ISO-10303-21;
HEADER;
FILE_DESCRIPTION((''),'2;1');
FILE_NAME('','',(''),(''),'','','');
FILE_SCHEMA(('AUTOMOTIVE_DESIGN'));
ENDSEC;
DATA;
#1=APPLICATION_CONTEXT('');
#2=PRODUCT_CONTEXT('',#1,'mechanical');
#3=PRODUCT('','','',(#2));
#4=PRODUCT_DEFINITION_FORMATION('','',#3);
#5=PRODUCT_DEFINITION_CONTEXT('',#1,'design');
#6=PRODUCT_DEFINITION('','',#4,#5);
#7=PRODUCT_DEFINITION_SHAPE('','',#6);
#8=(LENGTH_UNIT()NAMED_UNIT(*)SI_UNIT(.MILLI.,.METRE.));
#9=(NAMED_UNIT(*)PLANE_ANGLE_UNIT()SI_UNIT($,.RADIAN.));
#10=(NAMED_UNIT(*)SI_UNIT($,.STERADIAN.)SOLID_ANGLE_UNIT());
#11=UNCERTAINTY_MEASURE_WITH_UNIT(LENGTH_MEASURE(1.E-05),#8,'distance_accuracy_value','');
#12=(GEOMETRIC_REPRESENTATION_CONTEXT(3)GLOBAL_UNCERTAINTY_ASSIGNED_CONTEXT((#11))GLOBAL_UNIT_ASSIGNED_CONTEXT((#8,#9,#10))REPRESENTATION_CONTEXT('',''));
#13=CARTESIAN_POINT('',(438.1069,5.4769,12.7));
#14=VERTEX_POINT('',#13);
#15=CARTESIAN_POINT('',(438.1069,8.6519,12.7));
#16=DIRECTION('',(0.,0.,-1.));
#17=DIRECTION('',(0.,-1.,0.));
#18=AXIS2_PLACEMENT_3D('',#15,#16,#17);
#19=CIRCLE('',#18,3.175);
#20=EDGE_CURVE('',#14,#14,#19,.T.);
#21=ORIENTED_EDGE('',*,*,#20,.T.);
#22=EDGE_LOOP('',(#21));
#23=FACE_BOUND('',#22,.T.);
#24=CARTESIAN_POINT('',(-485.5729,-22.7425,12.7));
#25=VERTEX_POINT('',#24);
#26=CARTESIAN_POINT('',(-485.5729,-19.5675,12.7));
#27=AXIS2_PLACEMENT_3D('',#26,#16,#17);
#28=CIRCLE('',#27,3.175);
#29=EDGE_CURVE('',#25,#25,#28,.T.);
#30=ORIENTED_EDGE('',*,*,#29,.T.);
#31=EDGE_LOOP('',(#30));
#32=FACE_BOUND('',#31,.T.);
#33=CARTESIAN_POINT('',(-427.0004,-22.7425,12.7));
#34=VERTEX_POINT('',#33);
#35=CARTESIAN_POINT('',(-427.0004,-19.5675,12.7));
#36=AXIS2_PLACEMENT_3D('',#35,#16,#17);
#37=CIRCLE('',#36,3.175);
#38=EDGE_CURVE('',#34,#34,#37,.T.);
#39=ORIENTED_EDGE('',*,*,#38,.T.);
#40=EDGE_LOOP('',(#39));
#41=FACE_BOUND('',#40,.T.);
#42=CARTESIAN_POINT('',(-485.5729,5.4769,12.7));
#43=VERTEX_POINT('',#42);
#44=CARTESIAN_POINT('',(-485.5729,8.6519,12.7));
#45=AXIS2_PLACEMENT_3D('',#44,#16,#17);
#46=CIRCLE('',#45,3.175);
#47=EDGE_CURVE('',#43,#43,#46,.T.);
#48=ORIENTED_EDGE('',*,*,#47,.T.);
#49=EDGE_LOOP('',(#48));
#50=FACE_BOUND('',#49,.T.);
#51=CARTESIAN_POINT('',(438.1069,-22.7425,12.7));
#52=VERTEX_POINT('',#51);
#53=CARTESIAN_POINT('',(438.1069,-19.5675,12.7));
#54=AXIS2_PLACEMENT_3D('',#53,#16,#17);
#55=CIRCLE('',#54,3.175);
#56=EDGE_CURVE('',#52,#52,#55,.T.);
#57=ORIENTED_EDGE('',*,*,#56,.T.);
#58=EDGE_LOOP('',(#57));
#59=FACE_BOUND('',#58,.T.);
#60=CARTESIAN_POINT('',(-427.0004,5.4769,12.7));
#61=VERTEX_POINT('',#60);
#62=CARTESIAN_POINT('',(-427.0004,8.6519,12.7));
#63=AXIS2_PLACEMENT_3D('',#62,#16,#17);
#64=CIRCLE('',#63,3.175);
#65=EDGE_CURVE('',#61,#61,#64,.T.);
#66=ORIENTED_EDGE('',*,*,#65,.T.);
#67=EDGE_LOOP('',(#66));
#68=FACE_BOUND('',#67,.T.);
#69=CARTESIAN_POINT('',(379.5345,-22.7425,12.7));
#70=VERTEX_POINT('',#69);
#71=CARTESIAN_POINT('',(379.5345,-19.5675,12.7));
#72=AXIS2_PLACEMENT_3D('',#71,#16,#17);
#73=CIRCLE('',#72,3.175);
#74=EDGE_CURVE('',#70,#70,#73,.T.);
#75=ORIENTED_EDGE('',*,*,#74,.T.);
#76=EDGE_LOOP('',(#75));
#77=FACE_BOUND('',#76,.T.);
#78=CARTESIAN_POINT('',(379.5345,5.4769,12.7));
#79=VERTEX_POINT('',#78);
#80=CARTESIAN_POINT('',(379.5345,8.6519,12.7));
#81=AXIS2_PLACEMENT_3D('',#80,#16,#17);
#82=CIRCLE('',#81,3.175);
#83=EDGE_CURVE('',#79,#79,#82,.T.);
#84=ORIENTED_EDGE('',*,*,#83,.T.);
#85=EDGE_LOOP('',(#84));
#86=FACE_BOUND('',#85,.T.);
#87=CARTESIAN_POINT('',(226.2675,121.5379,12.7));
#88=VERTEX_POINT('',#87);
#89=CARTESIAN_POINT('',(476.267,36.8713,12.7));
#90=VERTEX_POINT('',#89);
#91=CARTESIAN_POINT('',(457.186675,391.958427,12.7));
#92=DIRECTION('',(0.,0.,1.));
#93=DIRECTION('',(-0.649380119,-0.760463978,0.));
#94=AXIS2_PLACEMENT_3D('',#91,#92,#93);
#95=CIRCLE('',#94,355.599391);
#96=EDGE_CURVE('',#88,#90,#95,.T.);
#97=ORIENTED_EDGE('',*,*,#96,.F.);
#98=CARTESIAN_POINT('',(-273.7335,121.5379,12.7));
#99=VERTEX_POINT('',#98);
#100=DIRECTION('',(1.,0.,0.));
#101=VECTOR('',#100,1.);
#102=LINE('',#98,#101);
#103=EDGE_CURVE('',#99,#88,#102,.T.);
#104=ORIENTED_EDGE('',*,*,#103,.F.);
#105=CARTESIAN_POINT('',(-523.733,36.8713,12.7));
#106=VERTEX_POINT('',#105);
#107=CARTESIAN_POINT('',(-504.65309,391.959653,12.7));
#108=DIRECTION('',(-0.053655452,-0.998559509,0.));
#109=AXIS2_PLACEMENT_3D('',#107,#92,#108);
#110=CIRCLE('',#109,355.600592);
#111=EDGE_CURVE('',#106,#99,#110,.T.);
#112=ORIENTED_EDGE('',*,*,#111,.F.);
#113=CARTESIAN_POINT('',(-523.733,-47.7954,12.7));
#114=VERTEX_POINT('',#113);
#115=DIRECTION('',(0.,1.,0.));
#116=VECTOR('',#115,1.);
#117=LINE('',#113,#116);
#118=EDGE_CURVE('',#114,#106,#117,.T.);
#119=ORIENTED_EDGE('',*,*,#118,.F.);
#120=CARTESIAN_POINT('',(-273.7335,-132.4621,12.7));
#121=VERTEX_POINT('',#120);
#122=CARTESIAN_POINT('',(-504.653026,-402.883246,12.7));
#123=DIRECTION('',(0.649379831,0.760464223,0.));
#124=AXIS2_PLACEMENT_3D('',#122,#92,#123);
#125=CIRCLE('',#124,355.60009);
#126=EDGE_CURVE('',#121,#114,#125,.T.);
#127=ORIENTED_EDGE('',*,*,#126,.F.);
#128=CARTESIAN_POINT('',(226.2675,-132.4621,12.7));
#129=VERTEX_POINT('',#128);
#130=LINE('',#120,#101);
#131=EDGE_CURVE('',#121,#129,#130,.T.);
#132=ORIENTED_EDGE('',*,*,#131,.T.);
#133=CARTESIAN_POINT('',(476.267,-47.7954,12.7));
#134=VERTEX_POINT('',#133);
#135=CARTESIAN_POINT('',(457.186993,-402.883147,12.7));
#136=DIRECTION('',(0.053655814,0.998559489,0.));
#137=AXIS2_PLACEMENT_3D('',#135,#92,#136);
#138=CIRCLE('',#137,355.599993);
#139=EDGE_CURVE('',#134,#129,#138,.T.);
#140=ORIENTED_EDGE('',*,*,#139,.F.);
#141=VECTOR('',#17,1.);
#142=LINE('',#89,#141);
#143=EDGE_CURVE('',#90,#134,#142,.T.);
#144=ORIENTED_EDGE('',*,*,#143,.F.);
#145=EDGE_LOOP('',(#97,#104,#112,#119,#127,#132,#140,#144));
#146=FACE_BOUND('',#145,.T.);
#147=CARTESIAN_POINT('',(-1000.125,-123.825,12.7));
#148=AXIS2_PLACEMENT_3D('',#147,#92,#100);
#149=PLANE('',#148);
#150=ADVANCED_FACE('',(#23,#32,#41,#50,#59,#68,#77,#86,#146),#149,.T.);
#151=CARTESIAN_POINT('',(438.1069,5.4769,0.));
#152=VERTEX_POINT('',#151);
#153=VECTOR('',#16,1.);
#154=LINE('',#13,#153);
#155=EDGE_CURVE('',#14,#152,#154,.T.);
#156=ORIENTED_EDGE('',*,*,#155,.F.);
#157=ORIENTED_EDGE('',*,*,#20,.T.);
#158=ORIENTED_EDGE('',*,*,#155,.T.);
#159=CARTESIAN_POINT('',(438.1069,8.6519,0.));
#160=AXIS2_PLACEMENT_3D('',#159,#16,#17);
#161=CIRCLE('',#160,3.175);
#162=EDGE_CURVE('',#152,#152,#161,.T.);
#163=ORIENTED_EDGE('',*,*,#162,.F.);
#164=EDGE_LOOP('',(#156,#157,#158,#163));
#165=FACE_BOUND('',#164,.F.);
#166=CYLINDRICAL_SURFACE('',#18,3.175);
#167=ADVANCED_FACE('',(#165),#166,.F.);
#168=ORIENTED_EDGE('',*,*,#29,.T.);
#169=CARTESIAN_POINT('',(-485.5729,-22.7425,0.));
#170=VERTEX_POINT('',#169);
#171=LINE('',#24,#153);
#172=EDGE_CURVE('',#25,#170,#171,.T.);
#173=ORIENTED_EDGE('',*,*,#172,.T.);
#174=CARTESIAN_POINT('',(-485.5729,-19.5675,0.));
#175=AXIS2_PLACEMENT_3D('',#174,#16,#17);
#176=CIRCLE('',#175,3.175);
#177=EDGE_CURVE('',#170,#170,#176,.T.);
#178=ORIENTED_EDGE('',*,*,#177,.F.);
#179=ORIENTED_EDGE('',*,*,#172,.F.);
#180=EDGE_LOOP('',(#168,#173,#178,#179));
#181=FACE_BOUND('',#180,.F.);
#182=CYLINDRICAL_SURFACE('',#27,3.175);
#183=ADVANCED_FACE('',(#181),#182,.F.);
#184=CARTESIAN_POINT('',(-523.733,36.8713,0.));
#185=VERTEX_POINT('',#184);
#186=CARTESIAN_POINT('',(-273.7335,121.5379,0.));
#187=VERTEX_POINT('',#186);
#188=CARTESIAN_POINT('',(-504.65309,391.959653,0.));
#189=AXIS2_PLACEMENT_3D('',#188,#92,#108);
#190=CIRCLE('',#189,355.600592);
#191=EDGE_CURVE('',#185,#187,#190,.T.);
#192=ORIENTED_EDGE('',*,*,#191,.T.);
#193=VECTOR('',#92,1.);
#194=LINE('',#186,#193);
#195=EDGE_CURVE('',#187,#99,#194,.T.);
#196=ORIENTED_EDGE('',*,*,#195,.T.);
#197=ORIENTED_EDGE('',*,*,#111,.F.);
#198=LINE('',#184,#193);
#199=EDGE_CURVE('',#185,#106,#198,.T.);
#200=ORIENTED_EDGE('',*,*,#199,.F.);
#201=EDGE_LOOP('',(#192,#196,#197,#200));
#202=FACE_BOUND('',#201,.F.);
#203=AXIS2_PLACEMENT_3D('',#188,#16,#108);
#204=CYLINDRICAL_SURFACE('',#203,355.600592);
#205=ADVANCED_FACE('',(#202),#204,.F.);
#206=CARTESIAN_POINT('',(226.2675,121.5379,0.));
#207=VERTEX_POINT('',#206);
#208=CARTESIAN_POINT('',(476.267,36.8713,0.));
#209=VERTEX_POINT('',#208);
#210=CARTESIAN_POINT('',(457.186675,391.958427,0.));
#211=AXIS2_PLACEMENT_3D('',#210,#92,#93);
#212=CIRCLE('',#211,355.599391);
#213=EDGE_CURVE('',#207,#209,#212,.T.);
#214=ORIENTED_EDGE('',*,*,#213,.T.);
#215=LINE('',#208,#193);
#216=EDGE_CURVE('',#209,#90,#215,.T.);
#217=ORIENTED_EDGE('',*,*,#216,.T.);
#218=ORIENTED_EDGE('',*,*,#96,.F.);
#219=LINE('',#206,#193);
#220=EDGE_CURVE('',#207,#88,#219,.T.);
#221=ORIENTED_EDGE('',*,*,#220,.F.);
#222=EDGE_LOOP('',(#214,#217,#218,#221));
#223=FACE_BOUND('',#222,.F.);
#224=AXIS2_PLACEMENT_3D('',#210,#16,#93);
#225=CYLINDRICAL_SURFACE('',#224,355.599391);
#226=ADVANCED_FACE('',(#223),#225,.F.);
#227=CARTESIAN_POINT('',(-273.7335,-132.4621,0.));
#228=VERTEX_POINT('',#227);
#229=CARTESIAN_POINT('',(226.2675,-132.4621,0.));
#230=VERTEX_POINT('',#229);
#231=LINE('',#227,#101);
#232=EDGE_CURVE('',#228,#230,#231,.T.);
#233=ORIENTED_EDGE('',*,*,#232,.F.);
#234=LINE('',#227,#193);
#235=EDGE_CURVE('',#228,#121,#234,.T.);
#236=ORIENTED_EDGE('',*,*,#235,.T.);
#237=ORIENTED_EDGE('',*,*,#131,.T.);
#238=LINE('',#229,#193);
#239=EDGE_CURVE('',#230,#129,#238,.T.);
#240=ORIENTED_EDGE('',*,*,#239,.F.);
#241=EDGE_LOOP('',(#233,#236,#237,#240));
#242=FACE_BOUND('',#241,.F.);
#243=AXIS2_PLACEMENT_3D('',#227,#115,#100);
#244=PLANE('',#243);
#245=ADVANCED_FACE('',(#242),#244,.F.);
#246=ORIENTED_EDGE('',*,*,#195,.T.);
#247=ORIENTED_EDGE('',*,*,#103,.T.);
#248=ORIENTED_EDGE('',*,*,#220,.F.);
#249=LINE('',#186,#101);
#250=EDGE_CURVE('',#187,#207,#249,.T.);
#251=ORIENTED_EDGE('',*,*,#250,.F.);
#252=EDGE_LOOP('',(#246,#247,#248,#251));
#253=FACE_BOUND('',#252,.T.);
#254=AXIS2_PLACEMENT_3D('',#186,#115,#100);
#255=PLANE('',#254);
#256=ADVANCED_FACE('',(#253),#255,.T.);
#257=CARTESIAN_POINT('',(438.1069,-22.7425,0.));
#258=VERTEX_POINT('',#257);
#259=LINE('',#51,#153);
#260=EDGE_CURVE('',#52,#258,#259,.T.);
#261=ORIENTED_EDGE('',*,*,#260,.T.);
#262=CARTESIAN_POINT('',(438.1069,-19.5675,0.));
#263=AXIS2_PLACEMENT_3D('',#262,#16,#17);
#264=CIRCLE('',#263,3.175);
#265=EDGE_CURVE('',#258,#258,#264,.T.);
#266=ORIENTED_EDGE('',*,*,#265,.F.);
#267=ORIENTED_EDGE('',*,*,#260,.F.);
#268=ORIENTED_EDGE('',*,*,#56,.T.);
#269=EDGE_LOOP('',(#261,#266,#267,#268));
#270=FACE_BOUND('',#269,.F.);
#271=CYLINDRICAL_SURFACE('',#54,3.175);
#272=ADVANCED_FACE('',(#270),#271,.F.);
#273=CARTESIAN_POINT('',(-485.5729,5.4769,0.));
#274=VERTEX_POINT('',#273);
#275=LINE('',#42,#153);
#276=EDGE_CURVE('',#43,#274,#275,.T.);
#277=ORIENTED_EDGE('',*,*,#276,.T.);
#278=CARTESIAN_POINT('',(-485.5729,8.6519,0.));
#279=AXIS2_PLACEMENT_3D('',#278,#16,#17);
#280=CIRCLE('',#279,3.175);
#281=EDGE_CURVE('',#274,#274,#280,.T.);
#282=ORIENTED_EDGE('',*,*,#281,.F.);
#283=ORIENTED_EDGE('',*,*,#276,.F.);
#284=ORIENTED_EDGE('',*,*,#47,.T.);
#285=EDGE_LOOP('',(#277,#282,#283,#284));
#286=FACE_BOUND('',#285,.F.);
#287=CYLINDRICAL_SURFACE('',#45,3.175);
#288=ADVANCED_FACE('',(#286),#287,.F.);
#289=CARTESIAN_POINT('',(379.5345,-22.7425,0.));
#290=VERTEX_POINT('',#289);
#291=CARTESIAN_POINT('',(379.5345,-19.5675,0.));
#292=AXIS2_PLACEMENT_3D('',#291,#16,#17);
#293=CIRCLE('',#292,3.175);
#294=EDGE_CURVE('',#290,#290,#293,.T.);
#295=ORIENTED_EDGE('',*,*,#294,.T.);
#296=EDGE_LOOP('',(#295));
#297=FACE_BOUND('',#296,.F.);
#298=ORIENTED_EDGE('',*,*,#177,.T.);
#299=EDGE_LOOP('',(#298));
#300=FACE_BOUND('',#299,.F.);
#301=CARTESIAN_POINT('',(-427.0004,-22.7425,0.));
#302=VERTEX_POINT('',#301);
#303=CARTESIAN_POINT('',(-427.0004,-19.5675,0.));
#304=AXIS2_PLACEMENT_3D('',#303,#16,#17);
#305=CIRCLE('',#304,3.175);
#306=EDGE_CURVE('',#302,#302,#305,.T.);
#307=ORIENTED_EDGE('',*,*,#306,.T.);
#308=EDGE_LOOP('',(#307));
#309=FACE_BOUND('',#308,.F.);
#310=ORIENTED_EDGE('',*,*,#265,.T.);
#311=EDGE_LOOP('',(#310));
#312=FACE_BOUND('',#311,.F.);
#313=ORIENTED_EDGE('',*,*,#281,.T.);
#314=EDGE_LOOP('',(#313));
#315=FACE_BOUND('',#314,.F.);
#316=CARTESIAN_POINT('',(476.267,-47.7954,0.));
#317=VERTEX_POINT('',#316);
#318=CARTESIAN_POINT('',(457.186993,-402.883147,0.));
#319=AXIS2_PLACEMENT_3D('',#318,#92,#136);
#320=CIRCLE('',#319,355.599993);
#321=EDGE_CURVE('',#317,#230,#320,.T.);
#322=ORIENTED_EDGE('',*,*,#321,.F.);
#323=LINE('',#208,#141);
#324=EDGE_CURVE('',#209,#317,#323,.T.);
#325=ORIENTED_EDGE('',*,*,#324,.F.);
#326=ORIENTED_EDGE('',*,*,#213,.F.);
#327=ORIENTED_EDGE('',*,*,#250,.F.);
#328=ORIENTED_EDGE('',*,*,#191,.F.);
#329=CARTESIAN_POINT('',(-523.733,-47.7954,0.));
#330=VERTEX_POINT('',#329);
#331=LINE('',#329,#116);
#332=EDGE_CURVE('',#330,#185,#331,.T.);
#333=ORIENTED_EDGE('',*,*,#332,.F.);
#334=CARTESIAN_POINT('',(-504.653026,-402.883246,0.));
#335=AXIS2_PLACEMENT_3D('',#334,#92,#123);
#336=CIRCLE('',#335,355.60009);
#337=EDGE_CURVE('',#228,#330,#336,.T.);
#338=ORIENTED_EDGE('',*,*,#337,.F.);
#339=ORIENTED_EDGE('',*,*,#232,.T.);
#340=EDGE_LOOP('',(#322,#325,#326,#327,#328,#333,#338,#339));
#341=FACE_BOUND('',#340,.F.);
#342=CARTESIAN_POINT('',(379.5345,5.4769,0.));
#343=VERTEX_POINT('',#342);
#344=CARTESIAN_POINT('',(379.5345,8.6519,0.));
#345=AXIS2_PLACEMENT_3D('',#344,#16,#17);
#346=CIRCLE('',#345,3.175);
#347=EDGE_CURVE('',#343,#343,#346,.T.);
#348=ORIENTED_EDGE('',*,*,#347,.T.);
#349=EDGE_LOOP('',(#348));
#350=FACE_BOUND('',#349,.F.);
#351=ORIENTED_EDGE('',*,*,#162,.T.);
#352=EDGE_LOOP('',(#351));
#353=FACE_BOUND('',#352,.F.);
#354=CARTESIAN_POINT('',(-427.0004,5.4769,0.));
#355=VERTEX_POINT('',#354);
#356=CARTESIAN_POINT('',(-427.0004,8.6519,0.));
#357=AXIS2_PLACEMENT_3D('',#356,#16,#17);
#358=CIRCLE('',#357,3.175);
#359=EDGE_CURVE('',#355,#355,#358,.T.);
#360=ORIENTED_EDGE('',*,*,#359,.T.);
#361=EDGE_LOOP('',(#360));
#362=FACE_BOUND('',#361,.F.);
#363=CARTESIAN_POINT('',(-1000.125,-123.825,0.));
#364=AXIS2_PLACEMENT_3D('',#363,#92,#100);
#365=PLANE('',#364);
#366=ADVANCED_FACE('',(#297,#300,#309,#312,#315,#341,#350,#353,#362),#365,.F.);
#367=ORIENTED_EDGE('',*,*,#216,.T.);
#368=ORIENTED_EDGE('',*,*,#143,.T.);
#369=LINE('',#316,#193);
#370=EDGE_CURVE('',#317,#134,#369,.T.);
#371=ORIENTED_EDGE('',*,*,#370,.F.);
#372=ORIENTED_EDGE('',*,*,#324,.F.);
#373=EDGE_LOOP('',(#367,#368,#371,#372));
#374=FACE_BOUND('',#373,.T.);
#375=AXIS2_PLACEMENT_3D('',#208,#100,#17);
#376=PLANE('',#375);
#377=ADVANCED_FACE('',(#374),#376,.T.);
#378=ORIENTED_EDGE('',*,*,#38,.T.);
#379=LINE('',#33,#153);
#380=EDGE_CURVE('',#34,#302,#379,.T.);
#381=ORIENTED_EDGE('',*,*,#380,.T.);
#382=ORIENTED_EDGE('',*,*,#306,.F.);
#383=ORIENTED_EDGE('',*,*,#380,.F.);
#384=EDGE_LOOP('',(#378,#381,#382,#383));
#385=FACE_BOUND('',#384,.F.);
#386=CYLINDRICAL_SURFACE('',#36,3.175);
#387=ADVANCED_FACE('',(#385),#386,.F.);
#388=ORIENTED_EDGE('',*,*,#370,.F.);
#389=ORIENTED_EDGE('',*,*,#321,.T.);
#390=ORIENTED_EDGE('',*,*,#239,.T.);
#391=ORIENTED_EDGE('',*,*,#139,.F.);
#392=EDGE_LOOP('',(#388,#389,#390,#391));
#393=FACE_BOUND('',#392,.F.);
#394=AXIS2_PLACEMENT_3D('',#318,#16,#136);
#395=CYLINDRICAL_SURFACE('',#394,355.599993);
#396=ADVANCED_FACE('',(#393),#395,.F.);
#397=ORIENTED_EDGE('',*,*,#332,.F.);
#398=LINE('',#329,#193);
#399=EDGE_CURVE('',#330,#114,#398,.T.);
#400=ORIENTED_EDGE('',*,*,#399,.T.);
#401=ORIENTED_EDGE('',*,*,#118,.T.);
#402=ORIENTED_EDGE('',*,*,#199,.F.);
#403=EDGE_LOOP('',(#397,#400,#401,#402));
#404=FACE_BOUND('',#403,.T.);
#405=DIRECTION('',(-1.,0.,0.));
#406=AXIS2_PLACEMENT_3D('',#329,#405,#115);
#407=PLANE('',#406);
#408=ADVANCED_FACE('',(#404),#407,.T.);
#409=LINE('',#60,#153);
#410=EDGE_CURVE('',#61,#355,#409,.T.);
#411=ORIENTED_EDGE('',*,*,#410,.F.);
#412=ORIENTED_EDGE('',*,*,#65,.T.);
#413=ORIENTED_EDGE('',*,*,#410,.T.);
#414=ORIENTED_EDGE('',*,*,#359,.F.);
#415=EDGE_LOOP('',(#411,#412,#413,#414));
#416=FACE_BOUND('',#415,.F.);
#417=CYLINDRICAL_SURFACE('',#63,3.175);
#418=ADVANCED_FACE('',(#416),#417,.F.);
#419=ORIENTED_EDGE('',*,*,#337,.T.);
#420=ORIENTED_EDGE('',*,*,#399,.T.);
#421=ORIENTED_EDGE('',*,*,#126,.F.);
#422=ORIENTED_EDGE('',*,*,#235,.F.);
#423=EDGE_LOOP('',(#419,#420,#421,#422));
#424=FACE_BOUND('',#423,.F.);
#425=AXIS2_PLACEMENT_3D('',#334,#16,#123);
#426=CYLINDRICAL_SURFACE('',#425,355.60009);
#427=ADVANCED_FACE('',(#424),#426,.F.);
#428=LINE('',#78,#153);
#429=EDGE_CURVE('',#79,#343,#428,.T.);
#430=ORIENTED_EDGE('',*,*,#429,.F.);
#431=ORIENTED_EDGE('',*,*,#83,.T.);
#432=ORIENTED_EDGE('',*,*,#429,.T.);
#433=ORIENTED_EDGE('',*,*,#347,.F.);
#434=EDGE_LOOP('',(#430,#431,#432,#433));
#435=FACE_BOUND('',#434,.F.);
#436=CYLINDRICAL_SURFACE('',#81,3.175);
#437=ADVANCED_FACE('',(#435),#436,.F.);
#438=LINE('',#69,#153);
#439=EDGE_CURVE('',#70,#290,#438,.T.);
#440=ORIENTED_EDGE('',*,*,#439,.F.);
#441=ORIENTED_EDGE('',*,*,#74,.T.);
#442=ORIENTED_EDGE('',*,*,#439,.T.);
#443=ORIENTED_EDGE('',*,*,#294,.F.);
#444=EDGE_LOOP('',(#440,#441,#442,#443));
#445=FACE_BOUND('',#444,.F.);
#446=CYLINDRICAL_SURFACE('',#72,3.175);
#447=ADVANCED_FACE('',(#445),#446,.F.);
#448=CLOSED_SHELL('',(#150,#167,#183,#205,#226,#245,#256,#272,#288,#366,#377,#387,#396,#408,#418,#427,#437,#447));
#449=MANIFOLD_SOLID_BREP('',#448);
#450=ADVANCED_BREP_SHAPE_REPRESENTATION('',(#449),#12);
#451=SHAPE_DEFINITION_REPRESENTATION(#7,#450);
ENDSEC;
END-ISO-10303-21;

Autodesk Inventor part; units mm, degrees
ref_plane "YZ Plane" through (0, 0, 0) normal (1, 0, 0) x (0, 1, 0)
ref_plane "XZ Plane" through (0, 0, 0) normal (0, 1, 0) x (-1, 0, 0)
ref_plane "XY Plane" through (0, 0, 0) normal (0, 0, 1) x (1, 0, 0)
sketch "Sketch1" plane through (0, 0, 0) normal (0, 0, 1) x (1, 0, 0)
  line L0 (726.3915, 245.3629) -> (1226.3925, 245.3629)
  line L1 (1476.392, 160.6963) -> (1476.392, 76.0296)
  line L2 (476.392, 76.0296) -> (476.392, 160.6963)
  arc A0 (476.392, 160.6963) -> (726.3915, 245.3629) centre (495.472, 515.784) ccw
  line L3 (1476.392, 118.3629) -> (476.392, 118.3629) construction
  line L4 (976.392, -8.6371) -> (976.392, 245.3629) construction
  arc A1 (726.3915, -8.6371) -> (476.392, 76.0296) centre (495.472, -279.0582) ccw
  arc A2 (1226.3925, 245.3629) -> (1476.392, 160.6963) centre (1457.312, 515.784) ccw
  arc A3 (1476.392, 76.0296) -> (1226.3925, -8.6371) centre (1457.312, -279.0582) ccw
  line L5 (726.3915, -8.6371) -> (1226.3925, -8.6371)
  point P0 (0, 0)
  dimension "d4" = 355.6
  dimension "d5" = 254
  dimension "d6" = 84.6667
extrude "Extrusion1" add sketch "Sketch1" along normal blind 12.7
sketch "Sketch2" plane through (0, 0, 12.7) normal (0, 0, 1) x (1, 0, 0)
  point P0 (0, 0)
move or copy body "Move Body1" bodies to move or copy 1 copy no translate (-1000.125, -123.825, 0)
sketch "Sketch3" plane through (-273.7335, 121.5379, 12.7) normal (0, 0, 1) x (1, 0, 0)
  line L0 (-249.9995, -84.6667) -> (-249.9995, -169.3333) construction
  arc A0 (750.0005, -169.3333) -> (500.001, -254) centre (730.9205, -524.4211) ccw projected
  line L1 (-249.9995, -84.6667) -> (750.0005, -84.6667) construction
  line L2 (750.0005, -84.6667) -> (750.0005, -169.3333) construction
  line L3 (750.0005, -169.3333) -> (-249.9995, -169.3333) construction
  line L4 (-249.9995, -169.3333) -> (-249.9995, -84.6667) construction
  line L5 (-249.9995, -84.6667) -> (-249.9995, -112.8861) construction
  line L6 (750.0005, -169.3333) -> (750.0005, -84.6667) construction
  line L7 (-249.9995, -112.8861) -> (750.0005, -112.8861) construction
  line L8 (750.0005, -112.8861) -> (750.0005, -141.1055) construction
  line L9 (750.0005, -141.1055) -> (-249.9995, -141.1055) construction
  line L10 (-249.9995, -141.1055) -> (-249.9995, -112.8861) construction
  arc A1 (-249.9995, -84.6667) -> (0, 0) centre (-230.9195, 270.4211) ccw projected
  line L11 (-211.8394, -84.6667) -> (-211.8394, -169.3333) construction
  arc A2 (0, -254) -> (-249.9995, -169.3333) centre (-230.9195, -524.4211) ccw projected
  line L12 (-211.8394, -84.6667) -> (-153.2669, -84.6667) construction
  line L13 (-153.2669, -84.6667) -> (-153.2669, -169.3333) construction
  line L14 (-153.2669, -169.3333) -> (-211.8394, -169.3333) construction
  line L15 (-211.8394, -169.3333) -> (-211.8394, -84.6667) construction
  line L16 (500.001, 0) -> (0, 0) projected
  line L17 (250.0005, 0) -> (250.0005, -254) construction
  point P0 (273.7335, -121.5379)
  point P1 (-211.8394, -112.8861)
  point P2 (-211.8394, -141.1055)
  point P3 (-153.2669, -112.8861)
  point P4 (-153.2669, -141.1055)
  point P5 (711.8404, -112.8861)
  point P6 (711.8404, -141.1055)
  point P7 (653.2679, -112.8861)
  point P8 (653.2679, -141.1055)
  dimension "d15" = 28.2194
  dimension "d16" = 28.2194
hole "Hole1" at (-485.5729, 8.6519, 12.7) at (-427.0004, 8.6519, 12.7) at (-485.5729, -19.5675, 12.7) at (-427.0004, -19.5675, 12.7) at (379.5345, 8.6519, 12.7) at (438.1069, 8.6519, 12.7) at (438.1069, -19.5675, 12.7) at (379.5345, -19.5675, 12.7) direction (0, 0, -1) diameter 6.35 end through all
thread "Thread1" size "1/4-20 UNC" class "2B" standard "ANSI Unified Screw Threads" full length
properties part number "Electric Skateboard Deck"
